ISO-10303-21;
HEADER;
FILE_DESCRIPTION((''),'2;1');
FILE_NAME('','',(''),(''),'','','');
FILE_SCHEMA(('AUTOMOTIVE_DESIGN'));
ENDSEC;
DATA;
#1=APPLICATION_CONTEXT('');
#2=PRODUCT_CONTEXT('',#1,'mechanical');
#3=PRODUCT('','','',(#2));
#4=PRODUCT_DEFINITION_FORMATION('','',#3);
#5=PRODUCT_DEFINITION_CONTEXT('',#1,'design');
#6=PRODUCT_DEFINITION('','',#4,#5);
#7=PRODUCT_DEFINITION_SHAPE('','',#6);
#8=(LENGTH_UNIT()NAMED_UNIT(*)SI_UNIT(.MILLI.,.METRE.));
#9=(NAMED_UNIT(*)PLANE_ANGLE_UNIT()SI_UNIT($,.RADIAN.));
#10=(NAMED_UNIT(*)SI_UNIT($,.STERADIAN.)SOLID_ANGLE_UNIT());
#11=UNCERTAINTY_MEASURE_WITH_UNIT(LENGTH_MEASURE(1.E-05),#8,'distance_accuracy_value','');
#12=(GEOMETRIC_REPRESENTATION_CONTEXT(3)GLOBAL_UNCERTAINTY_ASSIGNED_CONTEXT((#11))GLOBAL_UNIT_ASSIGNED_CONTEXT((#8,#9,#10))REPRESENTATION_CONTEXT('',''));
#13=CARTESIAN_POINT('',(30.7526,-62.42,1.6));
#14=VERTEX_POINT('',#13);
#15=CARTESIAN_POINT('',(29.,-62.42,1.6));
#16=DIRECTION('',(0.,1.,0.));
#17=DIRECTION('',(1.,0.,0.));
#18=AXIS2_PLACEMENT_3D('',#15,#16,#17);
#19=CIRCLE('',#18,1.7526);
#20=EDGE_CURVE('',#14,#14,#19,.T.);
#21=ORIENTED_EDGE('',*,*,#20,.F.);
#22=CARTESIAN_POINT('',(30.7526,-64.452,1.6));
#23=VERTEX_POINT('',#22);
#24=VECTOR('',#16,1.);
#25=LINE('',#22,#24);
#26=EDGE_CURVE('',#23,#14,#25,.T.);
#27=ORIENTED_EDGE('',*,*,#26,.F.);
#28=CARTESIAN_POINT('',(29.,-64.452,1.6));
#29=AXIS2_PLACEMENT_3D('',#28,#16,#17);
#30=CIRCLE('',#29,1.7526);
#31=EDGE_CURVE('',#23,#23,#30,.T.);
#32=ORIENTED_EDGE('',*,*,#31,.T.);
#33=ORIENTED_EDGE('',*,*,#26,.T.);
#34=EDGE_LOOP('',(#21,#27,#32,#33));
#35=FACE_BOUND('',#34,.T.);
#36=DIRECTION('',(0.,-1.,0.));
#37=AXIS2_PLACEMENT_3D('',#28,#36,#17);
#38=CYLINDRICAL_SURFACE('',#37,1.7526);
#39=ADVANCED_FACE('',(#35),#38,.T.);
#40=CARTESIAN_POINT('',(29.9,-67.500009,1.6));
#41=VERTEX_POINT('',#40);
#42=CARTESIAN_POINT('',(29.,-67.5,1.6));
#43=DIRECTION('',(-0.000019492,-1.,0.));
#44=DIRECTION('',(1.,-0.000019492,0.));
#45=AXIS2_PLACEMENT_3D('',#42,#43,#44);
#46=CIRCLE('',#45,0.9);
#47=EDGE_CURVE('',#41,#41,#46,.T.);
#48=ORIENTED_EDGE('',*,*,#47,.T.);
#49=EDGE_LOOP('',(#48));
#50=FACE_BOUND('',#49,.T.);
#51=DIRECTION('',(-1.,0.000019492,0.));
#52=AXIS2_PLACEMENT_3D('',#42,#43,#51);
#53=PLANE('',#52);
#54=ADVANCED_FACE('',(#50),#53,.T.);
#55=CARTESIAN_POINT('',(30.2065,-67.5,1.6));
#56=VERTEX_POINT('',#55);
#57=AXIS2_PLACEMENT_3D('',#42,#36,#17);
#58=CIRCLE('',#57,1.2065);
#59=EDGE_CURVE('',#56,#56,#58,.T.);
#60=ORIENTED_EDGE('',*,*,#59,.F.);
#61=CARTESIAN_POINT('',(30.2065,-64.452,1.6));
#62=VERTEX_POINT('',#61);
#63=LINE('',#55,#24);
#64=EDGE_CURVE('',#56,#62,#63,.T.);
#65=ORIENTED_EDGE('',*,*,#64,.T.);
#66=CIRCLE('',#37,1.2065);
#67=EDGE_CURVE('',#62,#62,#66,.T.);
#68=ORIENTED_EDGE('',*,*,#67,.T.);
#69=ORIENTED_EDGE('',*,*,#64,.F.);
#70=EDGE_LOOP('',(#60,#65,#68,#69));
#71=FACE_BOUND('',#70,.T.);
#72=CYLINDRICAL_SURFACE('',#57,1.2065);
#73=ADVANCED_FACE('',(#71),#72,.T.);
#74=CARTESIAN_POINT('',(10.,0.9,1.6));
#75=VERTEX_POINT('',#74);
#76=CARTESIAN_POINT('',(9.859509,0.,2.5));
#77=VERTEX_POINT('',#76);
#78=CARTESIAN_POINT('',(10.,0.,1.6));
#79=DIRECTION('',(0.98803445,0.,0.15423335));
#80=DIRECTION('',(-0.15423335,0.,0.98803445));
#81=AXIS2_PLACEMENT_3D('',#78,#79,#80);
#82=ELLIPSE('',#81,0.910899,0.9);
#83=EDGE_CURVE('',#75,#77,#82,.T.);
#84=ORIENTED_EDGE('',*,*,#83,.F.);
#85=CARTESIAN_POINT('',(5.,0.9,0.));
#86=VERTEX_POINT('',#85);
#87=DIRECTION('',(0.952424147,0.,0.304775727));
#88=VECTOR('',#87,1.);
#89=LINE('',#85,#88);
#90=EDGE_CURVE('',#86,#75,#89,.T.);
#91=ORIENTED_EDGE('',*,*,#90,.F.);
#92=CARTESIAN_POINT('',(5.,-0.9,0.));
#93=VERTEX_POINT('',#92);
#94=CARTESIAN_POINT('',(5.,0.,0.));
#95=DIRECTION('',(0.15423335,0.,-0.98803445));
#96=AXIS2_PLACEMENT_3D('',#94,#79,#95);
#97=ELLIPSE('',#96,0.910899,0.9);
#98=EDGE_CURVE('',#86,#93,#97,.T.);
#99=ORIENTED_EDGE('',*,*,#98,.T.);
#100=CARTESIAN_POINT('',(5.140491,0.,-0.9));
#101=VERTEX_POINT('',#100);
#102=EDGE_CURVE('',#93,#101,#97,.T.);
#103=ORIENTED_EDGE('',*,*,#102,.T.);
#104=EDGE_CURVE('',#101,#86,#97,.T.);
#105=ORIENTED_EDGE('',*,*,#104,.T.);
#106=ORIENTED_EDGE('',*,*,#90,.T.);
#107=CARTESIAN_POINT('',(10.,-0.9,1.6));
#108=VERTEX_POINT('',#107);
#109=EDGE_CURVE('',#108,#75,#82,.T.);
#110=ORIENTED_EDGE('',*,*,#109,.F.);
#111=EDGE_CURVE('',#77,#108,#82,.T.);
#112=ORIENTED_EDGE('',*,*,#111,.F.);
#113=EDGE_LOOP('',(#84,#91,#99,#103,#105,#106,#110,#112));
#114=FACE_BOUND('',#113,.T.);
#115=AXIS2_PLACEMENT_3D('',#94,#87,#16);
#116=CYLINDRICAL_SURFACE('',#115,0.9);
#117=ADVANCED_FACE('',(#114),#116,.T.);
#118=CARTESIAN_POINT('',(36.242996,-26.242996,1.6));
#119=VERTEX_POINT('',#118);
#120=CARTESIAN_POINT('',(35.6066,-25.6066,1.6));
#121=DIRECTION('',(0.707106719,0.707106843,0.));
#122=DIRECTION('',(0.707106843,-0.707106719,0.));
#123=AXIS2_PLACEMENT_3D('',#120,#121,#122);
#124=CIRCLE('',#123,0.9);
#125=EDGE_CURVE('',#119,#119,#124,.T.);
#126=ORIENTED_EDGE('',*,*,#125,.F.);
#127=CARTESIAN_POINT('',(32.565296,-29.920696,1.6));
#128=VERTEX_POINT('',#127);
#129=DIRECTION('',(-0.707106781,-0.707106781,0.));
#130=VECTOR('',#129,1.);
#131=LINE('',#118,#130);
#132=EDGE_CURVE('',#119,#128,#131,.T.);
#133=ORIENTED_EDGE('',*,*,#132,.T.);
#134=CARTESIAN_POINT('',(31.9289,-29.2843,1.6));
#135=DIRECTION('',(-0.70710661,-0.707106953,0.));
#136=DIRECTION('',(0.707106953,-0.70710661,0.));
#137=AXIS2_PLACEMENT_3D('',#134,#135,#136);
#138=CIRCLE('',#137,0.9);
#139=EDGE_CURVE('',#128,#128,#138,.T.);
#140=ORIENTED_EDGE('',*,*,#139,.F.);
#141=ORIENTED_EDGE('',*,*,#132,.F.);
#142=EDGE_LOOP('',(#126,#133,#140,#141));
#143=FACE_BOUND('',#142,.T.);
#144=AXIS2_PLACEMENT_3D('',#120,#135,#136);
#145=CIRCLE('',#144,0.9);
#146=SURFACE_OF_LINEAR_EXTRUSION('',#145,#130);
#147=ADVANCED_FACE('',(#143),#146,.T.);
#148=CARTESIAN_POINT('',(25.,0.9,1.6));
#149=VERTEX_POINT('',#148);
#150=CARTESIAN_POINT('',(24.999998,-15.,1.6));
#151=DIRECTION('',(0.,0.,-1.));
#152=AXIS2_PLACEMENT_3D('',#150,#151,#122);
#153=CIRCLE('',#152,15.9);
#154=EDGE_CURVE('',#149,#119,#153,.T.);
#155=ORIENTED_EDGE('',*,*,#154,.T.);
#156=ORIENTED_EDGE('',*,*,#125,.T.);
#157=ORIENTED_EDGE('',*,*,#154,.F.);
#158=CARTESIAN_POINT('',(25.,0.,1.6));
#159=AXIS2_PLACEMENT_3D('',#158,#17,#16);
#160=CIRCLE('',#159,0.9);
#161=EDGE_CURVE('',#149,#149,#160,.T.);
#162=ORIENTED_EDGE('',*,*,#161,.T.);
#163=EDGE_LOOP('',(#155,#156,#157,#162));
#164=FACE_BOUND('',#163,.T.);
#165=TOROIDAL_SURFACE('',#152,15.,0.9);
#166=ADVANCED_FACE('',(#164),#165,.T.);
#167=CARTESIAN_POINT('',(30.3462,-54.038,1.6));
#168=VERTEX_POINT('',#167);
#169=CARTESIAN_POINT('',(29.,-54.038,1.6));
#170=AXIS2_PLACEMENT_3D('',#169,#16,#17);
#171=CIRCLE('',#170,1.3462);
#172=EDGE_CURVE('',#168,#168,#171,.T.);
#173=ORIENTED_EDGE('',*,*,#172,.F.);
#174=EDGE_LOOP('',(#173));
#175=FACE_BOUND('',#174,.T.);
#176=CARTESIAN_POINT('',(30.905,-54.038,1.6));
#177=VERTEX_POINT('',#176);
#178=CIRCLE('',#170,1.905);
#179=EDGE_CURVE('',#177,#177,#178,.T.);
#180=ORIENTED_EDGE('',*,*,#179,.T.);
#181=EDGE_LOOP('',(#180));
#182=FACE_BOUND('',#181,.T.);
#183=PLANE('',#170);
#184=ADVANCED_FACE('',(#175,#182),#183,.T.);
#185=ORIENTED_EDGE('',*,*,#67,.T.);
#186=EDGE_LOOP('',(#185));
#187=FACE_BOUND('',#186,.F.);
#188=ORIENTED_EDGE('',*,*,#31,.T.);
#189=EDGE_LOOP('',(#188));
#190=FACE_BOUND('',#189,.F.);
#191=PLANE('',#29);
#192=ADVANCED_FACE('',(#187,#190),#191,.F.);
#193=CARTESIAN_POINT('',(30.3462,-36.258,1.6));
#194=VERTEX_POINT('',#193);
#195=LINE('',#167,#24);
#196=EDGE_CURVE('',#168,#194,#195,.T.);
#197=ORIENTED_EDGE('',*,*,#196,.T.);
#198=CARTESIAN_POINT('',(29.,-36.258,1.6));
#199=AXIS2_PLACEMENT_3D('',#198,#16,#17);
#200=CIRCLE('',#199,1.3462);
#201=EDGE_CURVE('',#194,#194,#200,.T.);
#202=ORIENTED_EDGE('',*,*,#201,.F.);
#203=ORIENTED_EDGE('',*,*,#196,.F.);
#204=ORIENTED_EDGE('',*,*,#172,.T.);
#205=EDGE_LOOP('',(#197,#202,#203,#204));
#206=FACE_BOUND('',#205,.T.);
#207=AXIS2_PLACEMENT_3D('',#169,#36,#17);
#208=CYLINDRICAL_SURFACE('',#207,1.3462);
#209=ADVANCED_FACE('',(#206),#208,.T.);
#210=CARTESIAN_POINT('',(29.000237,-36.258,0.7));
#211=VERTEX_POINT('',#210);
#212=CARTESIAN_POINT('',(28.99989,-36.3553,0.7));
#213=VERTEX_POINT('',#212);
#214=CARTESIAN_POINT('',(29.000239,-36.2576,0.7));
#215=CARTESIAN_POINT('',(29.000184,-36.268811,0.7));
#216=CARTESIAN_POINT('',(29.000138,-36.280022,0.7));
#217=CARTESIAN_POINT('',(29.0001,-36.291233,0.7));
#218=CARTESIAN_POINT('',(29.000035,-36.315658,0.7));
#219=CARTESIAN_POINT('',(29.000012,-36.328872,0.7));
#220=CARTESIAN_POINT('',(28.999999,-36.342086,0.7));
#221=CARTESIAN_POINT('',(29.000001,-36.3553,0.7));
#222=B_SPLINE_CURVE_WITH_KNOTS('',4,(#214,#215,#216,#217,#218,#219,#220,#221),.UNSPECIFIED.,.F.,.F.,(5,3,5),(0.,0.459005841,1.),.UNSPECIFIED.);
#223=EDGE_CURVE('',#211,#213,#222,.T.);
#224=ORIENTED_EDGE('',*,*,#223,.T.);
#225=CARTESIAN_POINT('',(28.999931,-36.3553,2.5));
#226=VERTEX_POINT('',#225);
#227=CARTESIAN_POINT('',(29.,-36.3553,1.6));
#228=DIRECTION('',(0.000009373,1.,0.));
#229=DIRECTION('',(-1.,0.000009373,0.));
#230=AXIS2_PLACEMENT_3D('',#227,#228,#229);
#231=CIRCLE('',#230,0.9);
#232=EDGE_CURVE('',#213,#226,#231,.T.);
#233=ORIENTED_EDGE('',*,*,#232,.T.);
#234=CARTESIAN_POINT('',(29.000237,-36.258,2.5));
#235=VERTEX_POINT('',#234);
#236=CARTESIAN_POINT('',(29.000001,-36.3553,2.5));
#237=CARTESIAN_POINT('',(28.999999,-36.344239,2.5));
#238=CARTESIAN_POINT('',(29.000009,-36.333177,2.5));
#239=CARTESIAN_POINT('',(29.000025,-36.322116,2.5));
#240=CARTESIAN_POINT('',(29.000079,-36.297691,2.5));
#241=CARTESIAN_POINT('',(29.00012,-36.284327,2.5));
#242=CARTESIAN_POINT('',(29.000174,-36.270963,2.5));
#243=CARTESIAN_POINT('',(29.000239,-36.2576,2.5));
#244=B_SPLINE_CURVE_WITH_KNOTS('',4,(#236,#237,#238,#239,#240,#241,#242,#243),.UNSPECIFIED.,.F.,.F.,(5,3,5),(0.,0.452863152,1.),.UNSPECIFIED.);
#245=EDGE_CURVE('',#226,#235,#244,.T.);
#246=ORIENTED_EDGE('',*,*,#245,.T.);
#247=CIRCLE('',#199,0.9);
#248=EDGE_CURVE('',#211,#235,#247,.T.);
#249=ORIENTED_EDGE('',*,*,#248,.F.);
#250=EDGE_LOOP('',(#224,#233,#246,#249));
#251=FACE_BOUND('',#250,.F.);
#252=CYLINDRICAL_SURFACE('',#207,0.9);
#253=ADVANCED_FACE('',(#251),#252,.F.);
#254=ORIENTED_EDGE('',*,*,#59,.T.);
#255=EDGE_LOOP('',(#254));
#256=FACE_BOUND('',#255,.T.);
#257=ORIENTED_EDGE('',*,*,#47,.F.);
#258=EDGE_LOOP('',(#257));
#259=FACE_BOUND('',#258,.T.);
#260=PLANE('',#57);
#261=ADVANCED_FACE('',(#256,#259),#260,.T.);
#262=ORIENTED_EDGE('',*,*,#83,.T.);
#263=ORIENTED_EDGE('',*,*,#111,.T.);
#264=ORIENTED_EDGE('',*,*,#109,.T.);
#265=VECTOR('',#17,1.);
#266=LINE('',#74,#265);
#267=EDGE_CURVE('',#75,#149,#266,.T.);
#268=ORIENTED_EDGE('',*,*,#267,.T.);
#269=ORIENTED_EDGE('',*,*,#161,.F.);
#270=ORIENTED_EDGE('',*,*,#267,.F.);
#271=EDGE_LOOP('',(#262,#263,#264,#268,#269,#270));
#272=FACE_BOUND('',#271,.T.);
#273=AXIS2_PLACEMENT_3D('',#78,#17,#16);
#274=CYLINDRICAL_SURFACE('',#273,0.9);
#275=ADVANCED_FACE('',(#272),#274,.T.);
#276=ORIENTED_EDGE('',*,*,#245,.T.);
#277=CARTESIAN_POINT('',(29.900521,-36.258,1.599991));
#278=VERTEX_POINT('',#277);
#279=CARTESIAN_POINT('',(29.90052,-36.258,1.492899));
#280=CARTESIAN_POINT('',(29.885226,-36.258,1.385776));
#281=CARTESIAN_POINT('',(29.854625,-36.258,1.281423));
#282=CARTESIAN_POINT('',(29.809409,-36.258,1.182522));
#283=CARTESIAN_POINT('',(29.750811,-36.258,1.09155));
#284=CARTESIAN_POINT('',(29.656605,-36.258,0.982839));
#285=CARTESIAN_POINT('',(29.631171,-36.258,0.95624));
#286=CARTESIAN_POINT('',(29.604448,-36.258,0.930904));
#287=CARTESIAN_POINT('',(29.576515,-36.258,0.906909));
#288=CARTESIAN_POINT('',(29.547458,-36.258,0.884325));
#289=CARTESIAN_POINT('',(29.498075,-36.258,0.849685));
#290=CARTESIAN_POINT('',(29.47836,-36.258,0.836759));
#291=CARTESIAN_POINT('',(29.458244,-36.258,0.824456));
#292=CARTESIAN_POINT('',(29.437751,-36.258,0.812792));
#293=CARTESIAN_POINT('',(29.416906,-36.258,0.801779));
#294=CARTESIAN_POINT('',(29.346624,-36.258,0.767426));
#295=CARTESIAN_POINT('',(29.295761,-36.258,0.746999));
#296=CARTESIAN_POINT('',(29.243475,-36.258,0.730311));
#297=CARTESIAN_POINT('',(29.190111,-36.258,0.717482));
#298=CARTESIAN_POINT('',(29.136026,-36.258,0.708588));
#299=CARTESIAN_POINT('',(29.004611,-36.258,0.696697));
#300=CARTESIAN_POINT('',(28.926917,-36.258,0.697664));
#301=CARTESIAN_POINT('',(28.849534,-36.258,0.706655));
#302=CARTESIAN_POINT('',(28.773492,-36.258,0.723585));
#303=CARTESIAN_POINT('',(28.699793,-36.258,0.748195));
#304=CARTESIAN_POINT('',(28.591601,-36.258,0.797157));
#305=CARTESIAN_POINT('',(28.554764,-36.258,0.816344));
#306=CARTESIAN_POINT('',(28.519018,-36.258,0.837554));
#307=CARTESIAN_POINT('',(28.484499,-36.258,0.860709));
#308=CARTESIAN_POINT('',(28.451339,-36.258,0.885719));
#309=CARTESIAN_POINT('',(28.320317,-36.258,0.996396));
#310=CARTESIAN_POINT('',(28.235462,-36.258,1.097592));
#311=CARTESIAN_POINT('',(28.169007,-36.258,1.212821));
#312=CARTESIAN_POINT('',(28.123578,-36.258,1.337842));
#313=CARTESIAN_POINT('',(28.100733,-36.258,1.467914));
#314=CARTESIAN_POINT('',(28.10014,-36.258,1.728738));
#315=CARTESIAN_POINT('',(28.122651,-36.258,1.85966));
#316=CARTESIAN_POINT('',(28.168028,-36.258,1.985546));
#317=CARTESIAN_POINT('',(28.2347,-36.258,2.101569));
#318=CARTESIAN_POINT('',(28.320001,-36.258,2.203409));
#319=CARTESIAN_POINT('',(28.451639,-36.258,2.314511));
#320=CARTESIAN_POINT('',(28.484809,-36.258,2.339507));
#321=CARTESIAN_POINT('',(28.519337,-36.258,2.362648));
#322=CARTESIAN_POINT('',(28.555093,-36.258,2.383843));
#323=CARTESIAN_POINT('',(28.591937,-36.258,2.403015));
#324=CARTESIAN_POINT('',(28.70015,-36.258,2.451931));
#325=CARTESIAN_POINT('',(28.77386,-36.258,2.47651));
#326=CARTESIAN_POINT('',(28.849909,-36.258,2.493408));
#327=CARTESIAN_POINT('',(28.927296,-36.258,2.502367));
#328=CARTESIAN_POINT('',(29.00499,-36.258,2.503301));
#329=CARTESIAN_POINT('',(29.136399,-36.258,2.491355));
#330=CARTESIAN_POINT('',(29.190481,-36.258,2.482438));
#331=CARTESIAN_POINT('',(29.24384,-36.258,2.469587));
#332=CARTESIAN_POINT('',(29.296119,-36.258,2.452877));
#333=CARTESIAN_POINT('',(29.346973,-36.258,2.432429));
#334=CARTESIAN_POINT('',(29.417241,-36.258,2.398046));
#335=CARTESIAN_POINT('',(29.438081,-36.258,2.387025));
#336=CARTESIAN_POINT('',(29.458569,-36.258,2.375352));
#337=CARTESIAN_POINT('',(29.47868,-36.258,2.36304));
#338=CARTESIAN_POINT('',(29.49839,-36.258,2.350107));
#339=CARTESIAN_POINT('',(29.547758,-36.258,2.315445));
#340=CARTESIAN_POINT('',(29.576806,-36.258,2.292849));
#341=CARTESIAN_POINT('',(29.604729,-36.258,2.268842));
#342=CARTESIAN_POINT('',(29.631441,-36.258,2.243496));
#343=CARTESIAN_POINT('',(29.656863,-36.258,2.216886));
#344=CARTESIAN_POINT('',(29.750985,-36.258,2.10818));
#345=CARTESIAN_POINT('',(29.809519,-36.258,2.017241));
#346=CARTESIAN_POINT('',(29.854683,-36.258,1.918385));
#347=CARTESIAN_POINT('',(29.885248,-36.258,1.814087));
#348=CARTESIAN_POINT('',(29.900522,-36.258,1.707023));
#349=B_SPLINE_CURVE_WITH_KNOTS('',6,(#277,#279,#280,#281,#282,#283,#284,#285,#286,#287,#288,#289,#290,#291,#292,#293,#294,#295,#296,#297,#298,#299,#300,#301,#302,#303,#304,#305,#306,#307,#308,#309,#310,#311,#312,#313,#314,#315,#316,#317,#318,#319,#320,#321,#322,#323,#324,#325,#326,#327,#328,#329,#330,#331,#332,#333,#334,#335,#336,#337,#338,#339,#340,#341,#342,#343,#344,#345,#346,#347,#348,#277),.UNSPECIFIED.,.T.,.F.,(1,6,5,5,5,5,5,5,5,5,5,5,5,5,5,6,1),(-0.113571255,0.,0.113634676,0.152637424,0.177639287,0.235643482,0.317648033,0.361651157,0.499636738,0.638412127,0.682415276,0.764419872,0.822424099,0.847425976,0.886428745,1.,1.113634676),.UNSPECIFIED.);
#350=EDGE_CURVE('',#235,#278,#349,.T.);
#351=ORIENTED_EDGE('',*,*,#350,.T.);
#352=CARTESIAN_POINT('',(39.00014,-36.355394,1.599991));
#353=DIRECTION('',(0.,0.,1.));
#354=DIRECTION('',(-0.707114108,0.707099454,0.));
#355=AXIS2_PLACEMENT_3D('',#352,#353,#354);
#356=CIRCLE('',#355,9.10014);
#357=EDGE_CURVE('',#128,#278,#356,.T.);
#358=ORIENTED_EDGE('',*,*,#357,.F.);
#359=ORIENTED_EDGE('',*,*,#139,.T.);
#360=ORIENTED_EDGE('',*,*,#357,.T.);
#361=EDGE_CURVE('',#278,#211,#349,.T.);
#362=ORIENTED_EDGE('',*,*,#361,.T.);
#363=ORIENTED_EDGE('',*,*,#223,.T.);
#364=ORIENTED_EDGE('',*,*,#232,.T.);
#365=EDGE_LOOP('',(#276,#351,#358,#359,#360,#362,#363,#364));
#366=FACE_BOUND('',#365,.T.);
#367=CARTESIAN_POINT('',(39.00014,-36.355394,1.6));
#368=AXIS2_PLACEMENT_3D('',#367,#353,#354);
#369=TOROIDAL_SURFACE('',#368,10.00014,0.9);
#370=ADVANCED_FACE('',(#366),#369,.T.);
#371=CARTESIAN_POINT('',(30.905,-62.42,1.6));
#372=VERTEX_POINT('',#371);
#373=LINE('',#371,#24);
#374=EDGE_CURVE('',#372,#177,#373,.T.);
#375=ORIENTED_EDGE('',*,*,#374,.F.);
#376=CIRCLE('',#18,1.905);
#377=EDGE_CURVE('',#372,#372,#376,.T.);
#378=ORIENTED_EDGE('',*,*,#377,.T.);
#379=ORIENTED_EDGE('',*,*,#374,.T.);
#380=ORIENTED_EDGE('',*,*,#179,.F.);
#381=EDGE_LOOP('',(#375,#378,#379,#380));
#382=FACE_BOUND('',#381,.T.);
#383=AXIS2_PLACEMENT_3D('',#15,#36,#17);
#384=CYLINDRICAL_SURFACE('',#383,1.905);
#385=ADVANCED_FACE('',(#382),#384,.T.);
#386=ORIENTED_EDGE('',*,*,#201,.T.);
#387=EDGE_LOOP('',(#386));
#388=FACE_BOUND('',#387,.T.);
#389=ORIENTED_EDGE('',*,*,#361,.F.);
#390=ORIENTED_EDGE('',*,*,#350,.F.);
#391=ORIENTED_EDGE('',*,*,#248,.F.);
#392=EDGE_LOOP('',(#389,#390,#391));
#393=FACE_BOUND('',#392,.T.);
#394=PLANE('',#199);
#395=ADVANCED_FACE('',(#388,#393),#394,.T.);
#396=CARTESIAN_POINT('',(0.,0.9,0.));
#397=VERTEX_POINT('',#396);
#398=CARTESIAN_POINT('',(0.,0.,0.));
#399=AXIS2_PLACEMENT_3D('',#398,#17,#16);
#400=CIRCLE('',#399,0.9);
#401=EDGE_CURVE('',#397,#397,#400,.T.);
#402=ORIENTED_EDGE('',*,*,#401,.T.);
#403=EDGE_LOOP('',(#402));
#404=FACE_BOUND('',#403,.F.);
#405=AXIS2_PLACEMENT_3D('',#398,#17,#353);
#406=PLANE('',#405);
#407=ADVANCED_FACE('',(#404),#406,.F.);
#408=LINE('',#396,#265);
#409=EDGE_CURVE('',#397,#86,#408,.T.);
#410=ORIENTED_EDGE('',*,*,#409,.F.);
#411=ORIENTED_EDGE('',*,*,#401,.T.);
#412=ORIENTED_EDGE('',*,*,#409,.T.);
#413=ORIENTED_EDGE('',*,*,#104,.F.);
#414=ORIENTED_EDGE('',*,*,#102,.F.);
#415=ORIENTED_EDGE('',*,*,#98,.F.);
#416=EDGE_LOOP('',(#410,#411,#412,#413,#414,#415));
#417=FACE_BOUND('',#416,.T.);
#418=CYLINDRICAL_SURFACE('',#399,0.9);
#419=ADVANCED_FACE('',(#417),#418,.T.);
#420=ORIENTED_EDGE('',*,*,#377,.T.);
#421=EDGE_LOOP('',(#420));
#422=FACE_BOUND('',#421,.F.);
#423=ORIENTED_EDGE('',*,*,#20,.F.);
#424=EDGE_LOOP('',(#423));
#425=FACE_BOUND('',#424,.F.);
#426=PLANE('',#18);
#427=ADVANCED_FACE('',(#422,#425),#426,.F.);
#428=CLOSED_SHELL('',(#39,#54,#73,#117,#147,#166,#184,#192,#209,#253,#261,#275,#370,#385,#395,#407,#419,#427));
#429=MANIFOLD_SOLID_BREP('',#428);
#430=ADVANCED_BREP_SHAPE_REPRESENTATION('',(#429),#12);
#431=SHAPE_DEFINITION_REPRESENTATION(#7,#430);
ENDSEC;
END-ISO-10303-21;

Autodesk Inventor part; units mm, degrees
ref_plane "XZ Plane" through (0, 0, 0) normal (0, 1, 0) x (-1, 0, 0)
sketch "Sketch2" plane through (0, 0, 0) normal (0, 1, 0) x (-1, 0, 0)
  line L0 (0, 0) -> (-5, 0)
  line L1 (-5, 0) -> (-10, 1.6)
  line L2 (-10, 1.6) -> (-15, 1.6)
  dimension "d0" = 1.6
  dimension "d1" = 5
  dimension "d2" = 5
  dimension "d3" = 5
sketch "Sketch3" plane through (0, 0, 0) normal (1, 0, 0) x (0, 1, 0)
  circle A0 centre (0, 0) radius 0.9
  dimension "d4" = 1.8
sweep "Sweep1" add profiles "Sketch3" path "Sketch2"
ref_plane "Work Plane1" through (0, 0, 1.6) normal (0, 0, 1) x (1, 0, 0)
sketch "Sketch4" plane through (0, 0, 1.6) normal (0, 0, 1) x (1, 0, 0)
  line L0 (15, 0) -> (25, 0)
  line L1 (35.6066, -25.6066) -> (31.9289, -29.2843)
  line L2 (29, -36.3553) -> (29, -67.5)
  arc A0 (35.6066, -25.6066) -> (25, 0) centre (25, -15) ccw
  arc A1 (31.9289, -29.2843) -> (29, -36.3553) centre (39, -36.3553) ccw
  point P0 (0, 0)
  dimension "d7" = 15
  dimension "d8" = 15
  dimension "d9" = 10
  dimension "d10" = 10
  dimension "d11" = 45
  dimension "d13" = 14
  dimension "d14" = 67.5
ref_plane "Work Plane2" through (15, 0, 0) normal (1, 0, 0) x (0, 1, 0)
sketch "Sketch5" plane through (15, 0, 0) normal (1, 0, 0) x (0, 1, 0)
  circle A0 centre (0, 1.6) radius 0.9
  point P0 (0, 0)
  dimension "d16" = 1.6
  dimension "d17" = 1.8
sweep "Sweep2" add profiles "Sketch5" path "Sketch4"
sketch "Sketch7" plane through (29, -67.5, 1.6) normal (0, -1, 0) x (1, 0, 0)
  circle A0 centre (0, 0) radius 0.9 projected
  circle A1 centre (0, 0) radius 1.2065
  point P0 (-29, -1.6)
  dimension "d21" = 2.413
extrude "Extrusion1" add sketch "Sketch7" against normal blind 3.048
sketch "Sketch8" plane through (29, -64.452, 1.6) normal (0, 1, 0) x (1, 0, 0)
  circle A0 centre (0, 0) radius 0.9 projected
  circle A1 centre (0, 0) radius 1.2065 projected
  circle A2 centre (0, 0) radius 1.7526
  point P0 (-29, 1.6)
  dimension "d24" = 3.5052
extrude "Extrusion2" add sketch "Sketch8" along normal blind 2.032 contours A1 | A2
sketch "Sketch9" plane through (29, -62.42, 1.6) normal (0, 1, 0) x (1, 0, 0)
  circle A0 centre (0, 0) radius 0.9 projected
  circle A1 centre (0, 0) radius 1.7526 projected
  circle A2 centre (0, 0) radius 1.905
  point P0 (-29, 1.6)
  dimension "d27" = 3.81
extrude "Extrusion3" add sketch "Sketch9" along normal blind 8.382 contours A1 | A2
sketch "Sketch10" plane through (29, -54.038, 1.6) normal (0, 1, 0) x (1, 0, 0)
  circle A0 centre (0, 0) radius 0.9 projected
  circle A1 centre (0, 0) radius 1.905 projected
  circle A2 centre (0, 0) radius 1.3462
  point P0 (-29, 1.6)
  dimension "d30" = 2.6924
extrude "Extrusion4" add sketch "Sketch10" along normal blind 17.78 contours A2
properties part number "coax_tx"
